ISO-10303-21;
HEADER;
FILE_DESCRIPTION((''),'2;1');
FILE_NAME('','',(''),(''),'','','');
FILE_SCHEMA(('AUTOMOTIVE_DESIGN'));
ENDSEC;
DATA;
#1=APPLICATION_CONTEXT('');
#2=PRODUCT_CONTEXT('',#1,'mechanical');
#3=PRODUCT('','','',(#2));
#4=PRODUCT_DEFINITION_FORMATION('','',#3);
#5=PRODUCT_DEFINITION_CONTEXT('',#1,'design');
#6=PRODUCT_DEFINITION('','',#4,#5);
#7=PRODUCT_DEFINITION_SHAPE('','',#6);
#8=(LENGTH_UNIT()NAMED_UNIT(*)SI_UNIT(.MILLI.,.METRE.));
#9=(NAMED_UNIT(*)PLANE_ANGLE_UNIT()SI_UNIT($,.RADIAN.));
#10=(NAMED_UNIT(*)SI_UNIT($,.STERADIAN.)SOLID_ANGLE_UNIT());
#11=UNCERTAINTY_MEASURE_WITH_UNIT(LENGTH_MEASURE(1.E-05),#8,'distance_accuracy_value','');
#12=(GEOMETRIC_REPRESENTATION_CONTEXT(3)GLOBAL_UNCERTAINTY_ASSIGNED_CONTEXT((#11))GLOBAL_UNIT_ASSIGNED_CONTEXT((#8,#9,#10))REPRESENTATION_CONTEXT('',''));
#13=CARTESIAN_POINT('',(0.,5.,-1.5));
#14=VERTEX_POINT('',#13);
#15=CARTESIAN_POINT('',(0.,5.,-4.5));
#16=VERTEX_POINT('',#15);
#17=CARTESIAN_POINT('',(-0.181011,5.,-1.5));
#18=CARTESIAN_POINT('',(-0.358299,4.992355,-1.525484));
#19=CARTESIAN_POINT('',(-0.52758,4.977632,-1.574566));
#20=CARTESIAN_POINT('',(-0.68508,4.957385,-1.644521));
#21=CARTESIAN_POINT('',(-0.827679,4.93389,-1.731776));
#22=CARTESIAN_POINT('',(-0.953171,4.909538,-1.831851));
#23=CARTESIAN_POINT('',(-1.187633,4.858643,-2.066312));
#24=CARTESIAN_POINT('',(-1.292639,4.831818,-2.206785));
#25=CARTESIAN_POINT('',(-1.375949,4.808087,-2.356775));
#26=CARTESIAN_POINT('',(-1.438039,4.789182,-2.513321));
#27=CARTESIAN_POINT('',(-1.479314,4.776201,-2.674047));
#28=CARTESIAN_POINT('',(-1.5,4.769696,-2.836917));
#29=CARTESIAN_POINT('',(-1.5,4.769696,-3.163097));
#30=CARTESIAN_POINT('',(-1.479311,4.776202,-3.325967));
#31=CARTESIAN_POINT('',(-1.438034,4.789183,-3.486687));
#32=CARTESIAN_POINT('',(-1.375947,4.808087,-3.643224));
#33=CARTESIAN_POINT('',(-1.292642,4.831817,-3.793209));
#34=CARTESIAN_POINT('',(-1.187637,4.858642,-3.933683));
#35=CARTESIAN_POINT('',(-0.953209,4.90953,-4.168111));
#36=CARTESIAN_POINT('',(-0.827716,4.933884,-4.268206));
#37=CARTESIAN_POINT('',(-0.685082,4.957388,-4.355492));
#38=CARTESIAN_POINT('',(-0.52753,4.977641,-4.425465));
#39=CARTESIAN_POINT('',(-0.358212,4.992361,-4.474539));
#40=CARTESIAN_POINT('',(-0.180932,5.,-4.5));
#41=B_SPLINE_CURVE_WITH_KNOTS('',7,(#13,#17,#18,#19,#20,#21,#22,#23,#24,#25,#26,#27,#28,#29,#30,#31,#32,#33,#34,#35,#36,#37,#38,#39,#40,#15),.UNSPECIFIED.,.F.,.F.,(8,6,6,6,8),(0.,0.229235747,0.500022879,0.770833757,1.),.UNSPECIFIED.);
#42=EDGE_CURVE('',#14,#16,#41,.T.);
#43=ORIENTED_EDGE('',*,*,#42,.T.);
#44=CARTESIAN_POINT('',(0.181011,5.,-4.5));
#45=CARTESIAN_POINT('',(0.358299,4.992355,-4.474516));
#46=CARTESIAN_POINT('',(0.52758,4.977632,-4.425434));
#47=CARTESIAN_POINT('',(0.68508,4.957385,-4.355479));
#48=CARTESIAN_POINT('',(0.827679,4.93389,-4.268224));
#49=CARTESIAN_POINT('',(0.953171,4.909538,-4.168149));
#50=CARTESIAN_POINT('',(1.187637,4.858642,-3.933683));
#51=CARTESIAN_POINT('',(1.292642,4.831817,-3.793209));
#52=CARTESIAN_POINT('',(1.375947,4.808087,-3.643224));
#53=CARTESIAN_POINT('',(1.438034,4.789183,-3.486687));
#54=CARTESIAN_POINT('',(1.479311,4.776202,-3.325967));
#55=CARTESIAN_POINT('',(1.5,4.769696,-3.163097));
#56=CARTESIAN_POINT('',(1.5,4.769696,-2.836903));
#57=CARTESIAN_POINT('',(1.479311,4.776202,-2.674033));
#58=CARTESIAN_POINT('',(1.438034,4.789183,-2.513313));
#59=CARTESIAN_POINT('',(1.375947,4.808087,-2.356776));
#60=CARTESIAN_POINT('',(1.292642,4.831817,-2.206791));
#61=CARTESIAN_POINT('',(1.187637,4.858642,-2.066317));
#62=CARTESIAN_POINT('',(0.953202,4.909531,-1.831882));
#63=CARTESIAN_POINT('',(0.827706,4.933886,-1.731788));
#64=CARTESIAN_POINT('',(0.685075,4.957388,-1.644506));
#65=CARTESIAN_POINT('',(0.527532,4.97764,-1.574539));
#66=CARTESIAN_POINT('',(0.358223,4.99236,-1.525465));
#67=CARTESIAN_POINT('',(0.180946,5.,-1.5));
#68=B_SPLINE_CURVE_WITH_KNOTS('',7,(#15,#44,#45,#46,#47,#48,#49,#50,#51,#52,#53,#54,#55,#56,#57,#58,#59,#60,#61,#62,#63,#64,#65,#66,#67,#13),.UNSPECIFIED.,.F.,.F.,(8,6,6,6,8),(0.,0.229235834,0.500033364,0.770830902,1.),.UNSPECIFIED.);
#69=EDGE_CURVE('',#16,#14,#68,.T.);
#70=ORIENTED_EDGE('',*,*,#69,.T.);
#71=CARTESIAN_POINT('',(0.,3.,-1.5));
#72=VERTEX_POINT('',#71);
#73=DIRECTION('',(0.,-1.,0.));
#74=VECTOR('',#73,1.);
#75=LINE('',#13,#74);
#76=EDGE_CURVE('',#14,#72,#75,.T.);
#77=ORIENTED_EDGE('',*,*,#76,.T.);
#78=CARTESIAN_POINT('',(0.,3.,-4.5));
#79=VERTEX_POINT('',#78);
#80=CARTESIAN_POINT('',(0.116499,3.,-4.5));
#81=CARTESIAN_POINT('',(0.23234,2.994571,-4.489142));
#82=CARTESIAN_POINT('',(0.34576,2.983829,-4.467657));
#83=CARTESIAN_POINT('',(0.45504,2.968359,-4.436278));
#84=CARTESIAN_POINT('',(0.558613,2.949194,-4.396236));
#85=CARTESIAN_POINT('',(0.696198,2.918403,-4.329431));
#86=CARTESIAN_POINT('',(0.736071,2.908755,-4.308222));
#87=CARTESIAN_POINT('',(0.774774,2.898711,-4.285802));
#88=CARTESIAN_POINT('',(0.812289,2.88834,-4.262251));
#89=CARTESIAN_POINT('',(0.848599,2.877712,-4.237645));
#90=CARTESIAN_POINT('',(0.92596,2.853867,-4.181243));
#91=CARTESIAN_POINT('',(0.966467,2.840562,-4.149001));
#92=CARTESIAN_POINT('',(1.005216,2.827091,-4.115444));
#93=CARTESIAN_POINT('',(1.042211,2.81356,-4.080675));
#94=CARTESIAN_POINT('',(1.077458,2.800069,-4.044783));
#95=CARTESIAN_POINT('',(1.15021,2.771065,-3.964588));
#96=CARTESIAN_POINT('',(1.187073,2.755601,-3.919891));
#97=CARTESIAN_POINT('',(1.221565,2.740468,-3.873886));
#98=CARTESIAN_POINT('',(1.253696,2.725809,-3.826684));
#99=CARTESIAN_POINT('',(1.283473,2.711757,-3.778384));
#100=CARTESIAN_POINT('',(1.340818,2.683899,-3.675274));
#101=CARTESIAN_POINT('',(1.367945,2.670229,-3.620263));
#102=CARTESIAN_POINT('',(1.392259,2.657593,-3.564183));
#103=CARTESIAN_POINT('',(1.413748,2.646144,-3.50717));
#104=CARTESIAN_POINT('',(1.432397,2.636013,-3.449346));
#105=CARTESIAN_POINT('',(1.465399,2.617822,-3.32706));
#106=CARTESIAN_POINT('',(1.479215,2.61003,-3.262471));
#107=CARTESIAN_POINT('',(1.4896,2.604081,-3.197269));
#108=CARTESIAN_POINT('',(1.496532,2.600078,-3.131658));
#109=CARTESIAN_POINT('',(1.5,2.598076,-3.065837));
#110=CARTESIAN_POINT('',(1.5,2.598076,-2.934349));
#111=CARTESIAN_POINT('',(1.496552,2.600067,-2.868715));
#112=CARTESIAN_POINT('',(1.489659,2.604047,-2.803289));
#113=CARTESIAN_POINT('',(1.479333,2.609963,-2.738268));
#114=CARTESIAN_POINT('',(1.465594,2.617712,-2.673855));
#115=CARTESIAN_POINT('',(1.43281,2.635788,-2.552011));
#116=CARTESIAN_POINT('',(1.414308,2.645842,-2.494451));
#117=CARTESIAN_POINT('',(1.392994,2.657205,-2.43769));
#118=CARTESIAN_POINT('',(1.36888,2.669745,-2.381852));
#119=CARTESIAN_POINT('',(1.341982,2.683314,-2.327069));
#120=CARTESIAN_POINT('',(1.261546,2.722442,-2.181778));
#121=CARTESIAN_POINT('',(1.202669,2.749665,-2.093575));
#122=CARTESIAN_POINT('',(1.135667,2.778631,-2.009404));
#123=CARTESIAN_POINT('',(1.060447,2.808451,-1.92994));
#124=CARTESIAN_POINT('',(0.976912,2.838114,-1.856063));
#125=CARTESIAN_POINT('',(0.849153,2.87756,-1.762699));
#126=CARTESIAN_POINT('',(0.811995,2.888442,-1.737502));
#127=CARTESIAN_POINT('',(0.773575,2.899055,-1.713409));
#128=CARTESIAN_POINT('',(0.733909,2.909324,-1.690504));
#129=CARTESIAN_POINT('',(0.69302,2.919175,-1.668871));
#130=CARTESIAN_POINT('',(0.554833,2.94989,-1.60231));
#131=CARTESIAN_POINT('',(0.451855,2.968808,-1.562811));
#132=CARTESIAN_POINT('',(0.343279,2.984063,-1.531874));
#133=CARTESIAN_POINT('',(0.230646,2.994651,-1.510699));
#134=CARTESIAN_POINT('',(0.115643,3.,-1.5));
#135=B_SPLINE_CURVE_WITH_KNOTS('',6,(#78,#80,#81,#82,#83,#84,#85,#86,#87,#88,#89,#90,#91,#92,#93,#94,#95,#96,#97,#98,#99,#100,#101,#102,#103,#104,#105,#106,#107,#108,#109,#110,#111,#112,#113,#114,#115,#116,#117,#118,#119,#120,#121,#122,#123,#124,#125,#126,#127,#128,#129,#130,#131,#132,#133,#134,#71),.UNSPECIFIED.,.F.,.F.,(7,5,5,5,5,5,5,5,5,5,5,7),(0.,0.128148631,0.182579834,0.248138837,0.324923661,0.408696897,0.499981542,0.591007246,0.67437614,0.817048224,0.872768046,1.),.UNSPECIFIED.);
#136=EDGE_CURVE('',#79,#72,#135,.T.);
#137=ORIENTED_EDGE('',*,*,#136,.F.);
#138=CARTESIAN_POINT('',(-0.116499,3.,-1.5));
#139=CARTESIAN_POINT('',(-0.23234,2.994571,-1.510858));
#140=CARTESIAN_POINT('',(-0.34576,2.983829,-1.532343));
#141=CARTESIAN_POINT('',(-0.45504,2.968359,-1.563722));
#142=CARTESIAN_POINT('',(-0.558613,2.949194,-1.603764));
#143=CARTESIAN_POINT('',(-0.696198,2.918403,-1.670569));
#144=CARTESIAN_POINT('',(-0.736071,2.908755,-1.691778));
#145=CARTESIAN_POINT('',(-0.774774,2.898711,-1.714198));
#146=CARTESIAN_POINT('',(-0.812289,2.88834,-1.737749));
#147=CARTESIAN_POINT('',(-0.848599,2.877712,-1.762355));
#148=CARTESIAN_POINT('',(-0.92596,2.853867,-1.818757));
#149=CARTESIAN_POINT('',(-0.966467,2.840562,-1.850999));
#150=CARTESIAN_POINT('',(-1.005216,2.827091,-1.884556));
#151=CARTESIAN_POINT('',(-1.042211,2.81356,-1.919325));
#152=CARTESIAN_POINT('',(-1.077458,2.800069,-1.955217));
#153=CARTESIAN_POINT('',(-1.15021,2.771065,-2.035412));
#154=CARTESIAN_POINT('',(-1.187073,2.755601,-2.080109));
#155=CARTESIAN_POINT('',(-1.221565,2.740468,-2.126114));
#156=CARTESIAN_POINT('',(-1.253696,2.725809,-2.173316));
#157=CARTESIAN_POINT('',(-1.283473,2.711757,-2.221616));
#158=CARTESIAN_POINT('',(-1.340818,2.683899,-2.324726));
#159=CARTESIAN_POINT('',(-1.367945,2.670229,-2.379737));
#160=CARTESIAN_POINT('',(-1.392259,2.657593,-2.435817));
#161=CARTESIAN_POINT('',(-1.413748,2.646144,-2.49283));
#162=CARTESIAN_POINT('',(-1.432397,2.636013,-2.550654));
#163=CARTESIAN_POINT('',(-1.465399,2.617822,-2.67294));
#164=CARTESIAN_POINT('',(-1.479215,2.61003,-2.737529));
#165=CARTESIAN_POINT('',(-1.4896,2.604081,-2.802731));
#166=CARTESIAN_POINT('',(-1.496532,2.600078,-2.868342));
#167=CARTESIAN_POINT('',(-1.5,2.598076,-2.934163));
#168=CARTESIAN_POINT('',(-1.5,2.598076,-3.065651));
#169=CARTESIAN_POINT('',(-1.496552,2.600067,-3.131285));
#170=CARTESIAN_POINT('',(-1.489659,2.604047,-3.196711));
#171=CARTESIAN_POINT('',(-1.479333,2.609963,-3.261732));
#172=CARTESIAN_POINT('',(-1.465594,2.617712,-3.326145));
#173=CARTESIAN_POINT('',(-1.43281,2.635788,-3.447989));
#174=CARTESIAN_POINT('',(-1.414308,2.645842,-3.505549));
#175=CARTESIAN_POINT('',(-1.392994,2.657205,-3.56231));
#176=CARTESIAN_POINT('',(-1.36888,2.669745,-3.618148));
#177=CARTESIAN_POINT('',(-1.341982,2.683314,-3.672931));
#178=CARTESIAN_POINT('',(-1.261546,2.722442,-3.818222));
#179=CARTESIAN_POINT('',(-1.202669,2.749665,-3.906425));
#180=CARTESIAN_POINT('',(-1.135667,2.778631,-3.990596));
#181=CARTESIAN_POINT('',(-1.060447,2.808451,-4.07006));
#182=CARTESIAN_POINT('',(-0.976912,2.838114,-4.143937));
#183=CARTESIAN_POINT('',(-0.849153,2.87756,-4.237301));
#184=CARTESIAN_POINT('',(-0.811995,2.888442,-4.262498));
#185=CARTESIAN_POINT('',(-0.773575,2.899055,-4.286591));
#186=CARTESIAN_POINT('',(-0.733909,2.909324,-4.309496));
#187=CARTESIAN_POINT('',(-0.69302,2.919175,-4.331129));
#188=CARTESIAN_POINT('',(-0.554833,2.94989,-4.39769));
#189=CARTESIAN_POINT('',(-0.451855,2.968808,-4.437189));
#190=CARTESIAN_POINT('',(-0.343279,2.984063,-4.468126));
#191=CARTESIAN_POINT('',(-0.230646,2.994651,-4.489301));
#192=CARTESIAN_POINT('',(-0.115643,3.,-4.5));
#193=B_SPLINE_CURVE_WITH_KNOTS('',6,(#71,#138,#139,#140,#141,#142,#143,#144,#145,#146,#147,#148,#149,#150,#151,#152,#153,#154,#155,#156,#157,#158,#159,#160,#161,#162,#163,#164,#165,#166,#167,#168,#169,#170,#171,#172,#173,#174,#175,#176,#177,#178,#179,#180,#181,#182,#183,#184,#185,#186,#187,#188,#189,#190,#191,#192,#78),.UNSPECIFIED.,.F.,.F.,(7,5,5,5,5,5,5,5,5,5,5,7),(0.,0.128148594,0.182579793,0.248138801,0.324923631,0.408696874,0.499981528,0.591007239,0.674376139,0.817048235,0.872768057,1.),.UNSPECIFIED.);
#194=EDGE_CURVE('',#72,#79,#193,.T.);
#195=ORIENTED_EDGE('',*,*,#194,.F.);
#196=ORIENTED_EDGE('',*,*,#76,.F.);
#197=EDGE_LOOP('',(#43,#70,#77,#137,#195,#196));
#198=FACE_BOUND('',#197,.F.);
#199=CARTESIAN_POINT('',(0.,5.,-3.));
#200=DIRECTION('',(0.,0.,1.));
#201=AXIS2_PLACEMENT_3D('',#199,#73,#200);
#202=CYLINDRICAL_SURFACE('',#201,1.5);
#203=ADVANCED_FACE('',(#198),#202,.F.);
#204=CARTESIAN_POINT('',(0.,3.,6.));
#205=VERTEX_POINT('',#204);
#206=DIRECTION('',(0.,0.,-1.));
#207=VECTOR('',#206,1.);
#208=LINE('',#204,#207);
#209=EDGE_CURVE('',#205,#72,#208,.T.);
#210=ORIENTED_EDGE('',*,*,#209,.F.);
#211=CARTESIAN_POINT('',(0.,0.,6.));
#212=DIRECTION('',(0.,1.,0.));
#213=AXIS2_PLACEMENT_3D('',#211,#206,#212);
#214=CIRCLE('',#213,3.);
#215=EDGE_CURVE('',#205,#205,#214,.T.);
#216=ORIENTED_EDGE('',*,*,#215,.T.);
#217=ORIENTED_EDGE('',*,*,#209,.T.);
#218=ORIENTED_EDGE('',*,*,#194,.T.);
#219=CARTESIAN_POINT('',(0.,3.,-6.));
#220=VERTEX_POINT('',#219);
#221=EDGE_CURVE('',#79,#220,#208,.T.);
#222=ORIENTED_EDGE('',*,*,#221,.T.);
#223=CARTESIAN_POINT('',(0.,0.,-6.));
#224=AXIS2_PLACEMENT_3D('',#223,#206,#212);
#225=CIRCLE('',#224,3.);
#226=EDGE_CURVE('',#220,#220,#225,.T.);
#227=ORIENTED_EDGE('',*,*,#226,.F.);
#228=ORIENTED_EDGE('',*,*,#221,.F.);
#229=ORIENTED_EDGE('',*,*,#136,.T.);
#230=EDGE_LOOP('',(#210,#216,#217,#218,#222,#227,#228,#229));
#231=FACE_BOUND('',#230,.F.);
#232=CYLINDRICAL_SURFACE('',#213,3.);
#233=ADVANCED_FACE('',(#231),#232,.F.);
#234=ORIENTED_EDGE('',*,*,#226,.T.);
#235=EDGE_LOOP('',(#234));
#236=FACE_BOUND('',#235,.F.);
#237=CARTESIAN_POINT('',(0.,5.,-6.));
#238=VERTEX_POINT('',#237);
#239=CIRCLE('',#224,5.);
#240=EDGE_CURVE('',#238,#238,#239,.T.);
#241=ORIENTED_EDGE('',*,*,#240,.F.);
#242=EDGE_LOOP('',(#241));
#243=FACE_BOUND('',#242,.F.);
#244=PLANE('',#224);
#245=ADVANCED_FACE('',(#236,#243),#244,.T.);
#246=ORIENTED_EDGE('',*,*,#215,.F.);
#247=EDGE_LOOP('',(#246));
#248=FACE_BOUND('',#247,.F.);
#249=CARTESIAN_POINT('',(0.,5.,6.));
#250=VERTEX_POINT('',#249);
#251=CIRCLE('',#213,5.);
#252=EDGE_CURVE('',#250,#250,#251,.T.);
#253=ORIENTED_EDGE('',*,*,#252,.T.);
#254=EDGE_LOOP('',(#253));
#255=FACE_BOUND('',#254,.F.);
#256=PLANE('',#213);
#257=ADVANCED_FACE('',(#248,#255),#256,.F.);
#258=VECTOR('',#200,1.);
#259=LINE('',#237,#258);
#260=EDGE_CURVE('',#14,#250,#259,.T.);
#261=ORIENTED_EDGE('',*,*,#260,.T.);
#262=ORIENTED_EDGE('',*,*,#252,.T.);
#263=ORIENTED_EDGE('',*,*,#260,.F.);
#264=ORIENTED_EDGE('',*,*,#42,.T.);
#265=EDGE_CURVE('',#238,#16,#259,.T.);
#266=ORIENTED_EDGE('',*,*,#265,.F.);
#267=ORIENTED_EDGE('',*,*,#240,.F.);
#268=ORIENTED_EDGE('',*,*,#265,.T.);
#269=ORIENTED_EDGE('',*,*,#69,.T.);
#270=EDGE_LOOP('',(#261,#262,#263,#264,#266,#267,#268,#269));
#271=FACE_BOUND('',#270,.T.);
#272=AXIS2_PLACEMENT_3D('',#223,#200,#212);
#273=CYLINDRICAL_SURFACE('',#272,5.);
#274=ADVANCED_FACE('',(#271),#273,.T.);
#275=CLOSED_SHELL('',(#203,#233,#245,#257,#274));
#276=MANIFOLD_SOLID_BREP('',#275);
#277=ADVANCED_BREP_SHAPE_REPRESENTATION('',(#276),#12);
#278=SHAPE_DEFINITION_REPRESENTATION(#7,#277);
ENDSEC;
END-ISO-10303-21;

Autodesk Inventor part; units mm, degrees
ref_plane "YZ Plane" through (0, 0, 0) normal (1, 0, 0) x (0, 1, 0)
ref_plane "XY Plane" through (0, 0, 0) normal (0, 0, 1) x (1, 0, 0)
sketch "Esquisse1" plane through (0, 0, 0) normal (1, 0, 0) x (0, 1, 0)
  line L0 (5, 6) -> (3, 6)
  line L1 (3, 6) -> (3, -6)
  line L2 (3, -6) -> (5, -6)
  line L3 (5, -6) -> (5, 6)
  line L4 (5, 6) -> (3, -6) construction
  line L5 (3, 6) -> (5, -6) construction
  line L6 (0, 12.4388) -> (0, -12.4388)
  line L7 (0, 0) -> (14.0159, 0) construction
  point P0 (4, 0)
  dimension "d0" = 6
  dimension "d1" = 10
  dimension "d2" = 12
revolve "Révolution1" add sketch "Esquisse1" angle 360 about axis through (0, 0, 12.4388) along (0, 0, -1)
ref_plane "Plan de construction1" through (0, 5, 0) normal (0, 1, 0) x (-1, 0, 0)
sketch "Esquisse2" plane through (0, 5, 0) normal (0, 1, 0) x (-1, 0, 0)
  line L0 (0, 0) -> (0, -3) construction
  dimension "d4" = 3
hole "Perçage1" at (0, 5, -3) direction (0, -1, 0) diameter 3 end up to surface
properties part number "entretoise"
